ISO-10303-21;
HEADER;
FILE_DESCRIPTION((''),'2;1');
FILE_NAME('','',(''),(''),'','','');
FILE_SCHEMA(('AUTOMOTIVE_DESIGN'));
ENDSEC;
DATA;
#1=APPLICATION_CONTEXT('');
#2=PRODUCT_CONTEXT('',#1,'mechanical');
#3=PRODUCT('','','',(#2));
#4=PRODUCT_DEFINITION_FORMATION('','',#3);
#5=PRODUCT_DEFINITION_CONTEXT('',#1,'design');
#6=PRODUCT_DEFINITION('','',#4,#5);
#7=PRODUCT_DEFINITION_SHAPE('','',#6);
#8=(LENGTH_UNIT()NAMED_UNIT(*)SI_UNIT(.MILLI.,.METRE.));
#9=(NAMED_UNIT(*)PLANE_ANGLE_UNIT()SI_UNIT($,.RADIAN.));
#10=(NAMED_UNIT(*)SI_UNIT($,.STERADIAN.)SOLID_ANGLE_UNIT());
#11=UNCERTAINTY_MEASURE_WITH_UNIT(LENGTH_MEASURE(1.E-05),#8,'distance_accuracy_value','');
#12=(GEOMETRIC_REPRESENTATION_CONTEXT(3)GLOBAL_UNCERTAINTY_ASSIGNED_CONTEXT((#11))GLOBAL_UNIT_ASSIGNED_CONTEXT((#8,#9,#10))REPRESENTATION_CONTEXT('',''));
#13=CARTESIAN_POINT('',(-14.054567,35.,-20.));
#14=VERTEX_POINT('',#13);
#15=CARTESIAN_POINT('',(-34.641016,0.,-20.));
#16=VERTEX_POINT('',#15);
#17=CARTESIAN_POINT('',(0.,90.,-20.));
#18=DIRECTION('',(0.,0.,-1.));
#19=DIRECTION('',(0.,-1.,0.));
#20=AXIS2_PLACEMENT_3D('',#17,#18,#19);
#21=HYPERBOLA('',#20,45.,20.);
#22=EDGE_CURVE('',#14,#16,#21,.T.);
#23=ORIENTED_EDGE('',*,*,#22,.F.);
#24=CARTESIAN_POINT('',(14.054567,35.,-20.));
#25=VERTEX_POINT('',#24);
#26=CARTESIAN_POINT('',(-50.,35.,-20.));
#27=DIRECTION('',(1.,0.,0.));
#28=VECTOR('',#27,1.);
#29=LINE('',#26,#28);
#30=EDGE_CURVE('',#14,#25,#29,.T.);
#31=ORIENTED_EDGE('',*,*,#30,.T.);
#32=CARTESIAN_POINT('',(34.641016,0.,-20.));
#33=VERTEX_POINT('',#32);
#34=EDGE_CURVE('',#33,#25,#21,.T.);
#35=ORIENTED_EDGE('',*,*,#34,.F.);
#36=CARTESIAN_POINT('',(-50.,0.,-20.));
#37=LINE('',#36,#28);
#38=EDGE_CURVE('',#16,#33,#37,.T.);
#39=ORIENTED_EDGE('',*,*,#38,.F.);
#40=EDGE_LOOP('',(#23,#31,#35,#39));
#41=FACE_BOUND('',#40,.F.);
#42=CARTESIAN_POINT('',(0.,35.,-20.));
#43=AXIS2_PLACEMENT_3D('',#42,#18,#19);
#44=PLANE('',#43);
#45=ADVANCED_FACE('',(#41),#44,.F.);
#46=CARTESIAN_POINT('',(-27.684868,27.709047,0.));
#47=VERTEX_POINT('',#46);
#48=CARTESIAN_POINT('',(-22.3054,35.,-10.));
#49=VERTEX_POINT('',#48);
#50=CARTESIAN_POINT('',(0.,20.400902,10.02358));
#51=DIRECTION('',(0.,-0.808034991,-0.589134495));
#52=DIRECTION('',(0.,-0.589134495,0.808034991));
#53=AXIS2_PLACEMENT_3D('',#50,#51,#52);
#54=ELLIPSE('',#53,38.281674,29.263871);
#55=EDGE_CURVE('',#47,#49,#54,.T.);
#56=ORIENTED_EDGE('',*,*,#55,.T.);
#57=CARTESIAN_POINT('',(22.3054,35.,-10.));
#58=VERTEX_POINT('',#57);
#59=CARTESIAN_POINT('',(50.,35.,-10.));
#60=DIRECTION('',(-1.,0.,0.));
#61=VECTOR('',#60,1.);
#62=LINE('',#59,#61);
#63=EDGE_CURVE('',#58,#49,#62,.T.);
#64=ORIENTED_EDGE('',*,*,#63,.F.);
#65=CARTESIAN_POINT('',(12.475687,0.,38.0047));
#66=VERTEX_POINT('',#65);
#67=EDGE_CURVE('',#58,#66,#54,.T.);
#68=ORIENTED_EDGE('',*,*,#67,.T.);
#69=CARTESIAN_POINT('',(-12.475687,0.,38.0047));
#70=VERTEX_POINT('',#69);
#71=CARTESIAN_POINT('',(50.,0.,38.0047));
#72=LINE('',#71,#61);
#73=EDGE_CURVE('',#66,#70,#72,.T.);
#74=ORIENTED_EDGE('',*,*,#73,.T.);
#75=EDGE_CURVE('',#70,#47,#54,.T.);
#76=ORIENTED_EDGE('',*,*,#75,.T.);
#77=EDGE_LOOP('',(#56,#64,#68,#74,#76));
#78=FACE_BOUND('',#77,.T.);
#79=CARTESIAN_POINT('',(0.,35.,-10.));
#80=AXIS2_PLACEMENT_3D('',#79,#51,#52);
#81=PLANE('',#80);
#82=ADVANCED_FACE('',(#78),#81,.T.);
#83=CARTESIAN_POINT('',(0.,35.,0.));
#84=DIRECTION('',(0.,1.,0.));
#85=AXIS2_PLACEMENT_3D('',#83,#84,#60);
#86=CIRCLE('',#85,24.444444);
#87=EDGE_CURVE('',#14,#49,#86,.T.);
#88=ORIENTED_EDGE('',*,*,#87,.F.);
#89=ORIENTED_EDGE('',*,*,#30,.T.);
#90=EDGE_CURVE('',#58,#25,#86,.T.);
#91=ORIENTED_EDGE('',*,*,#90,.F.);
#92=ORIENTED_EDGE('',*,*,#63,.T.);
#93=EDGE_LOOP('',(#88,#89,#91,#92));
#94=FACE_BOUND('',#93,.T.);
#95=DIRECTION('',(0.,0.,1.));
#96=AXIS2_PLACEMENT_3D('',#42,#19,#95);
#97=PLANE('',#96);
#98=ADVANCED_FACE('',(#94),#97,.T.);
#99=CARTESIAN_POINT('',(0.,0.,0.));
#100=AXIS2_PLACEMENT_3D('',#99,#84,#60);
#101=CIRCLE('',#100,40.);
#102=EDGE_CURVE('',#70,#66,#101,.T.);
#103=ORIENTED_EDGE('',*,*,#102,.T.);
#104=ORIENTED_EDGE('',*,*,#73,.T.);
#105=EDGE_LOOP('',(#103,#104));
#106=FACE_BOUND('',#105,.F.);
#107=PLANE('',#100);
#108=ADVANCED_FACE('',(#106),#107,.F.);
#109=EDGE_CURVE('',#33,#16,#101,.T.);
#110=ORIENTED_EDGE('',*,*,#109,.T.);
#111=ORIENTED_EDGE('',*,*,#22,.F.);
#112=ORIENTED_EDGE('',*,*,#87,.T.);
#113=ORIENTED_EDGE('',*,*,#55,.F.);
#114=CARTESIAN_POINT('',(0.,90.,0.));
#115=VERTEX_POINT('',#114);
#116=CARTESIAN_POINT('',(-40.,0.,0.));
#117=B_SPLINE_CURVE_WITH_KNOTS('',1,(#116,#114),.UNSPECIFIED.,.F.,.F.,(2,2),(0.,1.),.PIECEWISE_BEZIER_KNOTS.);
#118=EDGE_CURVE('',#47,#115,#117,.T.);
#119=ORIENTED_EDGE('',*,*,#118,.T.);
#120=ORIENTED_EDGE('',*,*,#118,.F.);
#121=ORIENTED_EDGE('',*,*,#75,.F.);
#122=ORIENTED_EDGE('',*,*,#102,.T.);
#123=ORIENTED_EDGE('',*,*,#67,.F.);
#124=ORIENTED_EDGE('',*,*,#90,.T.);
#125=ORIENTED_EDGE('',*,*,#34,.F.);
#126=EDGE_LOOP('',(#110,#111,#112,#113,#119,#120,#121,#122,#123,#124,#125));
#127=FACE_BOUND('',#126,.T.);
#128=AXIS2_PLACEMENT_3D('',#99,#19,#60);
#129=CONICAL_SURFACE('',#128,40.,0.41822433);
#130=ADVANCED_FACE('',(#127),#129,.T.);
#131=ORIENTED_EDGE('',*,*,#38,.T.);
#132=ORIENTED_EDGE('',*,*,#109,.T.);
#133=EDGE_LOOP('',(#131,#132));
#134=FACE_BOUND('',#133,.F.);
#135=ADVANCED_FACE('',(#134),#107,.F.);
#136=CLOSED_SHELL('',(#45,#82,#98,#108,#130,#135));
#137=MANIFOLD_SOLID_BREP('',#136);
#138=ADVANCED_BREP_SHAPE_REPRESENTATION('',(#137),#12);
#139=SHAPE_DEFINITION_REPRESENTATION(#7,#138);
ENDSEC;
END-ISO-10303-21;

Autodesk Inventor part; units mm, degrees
ref_plane "YZ Plane" through (0, 0, 0) normal (1, 0, 0) x (0, 1, 0)
ref_plane "XZ Plane" through (0, 0, 0) normal (0, 1, 0) x (-1, 0, 0)
ref_plane "XY Plane" through (0, 0, 0) normal (0, 0, 1) x (1, 0, 0)
sketch "Эскиз1" plane through (0, 0, 0) normal (0, 1, 0) x (-1, 0, 0)
  circle A0 centre (0, 0) radius 40
  dimension "d0" = 80
ref_plane "РабПлоскость4" through (0, 90, 0) normal (0, 1, 0) x (-1, 0, 0)
ref_plane "РабПлоскость1" through (0, 0, 0) normal (0, 1, 0) x (-1, 0, 0)
sketch "Эскиз2" plane through (0, 90, 0) normal (0, 1, 0) x (-1, 0, 0)
  point P0 (0, 0)
  point P1 (0, 0)
loft "Лофт1" add profiles "Эскиз1" section 2 point at (0, 90, 0)
sketch "Эскиз3" plane through (0, 0, 0) normal (1, 0, 0) x (0, 1, 0)
  line L0 (0, 0) -> (0, -20)
  line L1 (0, -40) -> (0, 40) projected
  line L2 (35, -20) -> (35, -10)
  line L3 (35, -10) -> (0, 38.0047)
  line L4 (35, -20) -> (0, -20)
  dimension "d6" = 10
  dimension "d7" = 20
  dimension "d8" = 35
extrude "Выдавливание1" cut sketch "Эскиз3" along normal mid plane 100
properties part number "Конус с вырезом"
